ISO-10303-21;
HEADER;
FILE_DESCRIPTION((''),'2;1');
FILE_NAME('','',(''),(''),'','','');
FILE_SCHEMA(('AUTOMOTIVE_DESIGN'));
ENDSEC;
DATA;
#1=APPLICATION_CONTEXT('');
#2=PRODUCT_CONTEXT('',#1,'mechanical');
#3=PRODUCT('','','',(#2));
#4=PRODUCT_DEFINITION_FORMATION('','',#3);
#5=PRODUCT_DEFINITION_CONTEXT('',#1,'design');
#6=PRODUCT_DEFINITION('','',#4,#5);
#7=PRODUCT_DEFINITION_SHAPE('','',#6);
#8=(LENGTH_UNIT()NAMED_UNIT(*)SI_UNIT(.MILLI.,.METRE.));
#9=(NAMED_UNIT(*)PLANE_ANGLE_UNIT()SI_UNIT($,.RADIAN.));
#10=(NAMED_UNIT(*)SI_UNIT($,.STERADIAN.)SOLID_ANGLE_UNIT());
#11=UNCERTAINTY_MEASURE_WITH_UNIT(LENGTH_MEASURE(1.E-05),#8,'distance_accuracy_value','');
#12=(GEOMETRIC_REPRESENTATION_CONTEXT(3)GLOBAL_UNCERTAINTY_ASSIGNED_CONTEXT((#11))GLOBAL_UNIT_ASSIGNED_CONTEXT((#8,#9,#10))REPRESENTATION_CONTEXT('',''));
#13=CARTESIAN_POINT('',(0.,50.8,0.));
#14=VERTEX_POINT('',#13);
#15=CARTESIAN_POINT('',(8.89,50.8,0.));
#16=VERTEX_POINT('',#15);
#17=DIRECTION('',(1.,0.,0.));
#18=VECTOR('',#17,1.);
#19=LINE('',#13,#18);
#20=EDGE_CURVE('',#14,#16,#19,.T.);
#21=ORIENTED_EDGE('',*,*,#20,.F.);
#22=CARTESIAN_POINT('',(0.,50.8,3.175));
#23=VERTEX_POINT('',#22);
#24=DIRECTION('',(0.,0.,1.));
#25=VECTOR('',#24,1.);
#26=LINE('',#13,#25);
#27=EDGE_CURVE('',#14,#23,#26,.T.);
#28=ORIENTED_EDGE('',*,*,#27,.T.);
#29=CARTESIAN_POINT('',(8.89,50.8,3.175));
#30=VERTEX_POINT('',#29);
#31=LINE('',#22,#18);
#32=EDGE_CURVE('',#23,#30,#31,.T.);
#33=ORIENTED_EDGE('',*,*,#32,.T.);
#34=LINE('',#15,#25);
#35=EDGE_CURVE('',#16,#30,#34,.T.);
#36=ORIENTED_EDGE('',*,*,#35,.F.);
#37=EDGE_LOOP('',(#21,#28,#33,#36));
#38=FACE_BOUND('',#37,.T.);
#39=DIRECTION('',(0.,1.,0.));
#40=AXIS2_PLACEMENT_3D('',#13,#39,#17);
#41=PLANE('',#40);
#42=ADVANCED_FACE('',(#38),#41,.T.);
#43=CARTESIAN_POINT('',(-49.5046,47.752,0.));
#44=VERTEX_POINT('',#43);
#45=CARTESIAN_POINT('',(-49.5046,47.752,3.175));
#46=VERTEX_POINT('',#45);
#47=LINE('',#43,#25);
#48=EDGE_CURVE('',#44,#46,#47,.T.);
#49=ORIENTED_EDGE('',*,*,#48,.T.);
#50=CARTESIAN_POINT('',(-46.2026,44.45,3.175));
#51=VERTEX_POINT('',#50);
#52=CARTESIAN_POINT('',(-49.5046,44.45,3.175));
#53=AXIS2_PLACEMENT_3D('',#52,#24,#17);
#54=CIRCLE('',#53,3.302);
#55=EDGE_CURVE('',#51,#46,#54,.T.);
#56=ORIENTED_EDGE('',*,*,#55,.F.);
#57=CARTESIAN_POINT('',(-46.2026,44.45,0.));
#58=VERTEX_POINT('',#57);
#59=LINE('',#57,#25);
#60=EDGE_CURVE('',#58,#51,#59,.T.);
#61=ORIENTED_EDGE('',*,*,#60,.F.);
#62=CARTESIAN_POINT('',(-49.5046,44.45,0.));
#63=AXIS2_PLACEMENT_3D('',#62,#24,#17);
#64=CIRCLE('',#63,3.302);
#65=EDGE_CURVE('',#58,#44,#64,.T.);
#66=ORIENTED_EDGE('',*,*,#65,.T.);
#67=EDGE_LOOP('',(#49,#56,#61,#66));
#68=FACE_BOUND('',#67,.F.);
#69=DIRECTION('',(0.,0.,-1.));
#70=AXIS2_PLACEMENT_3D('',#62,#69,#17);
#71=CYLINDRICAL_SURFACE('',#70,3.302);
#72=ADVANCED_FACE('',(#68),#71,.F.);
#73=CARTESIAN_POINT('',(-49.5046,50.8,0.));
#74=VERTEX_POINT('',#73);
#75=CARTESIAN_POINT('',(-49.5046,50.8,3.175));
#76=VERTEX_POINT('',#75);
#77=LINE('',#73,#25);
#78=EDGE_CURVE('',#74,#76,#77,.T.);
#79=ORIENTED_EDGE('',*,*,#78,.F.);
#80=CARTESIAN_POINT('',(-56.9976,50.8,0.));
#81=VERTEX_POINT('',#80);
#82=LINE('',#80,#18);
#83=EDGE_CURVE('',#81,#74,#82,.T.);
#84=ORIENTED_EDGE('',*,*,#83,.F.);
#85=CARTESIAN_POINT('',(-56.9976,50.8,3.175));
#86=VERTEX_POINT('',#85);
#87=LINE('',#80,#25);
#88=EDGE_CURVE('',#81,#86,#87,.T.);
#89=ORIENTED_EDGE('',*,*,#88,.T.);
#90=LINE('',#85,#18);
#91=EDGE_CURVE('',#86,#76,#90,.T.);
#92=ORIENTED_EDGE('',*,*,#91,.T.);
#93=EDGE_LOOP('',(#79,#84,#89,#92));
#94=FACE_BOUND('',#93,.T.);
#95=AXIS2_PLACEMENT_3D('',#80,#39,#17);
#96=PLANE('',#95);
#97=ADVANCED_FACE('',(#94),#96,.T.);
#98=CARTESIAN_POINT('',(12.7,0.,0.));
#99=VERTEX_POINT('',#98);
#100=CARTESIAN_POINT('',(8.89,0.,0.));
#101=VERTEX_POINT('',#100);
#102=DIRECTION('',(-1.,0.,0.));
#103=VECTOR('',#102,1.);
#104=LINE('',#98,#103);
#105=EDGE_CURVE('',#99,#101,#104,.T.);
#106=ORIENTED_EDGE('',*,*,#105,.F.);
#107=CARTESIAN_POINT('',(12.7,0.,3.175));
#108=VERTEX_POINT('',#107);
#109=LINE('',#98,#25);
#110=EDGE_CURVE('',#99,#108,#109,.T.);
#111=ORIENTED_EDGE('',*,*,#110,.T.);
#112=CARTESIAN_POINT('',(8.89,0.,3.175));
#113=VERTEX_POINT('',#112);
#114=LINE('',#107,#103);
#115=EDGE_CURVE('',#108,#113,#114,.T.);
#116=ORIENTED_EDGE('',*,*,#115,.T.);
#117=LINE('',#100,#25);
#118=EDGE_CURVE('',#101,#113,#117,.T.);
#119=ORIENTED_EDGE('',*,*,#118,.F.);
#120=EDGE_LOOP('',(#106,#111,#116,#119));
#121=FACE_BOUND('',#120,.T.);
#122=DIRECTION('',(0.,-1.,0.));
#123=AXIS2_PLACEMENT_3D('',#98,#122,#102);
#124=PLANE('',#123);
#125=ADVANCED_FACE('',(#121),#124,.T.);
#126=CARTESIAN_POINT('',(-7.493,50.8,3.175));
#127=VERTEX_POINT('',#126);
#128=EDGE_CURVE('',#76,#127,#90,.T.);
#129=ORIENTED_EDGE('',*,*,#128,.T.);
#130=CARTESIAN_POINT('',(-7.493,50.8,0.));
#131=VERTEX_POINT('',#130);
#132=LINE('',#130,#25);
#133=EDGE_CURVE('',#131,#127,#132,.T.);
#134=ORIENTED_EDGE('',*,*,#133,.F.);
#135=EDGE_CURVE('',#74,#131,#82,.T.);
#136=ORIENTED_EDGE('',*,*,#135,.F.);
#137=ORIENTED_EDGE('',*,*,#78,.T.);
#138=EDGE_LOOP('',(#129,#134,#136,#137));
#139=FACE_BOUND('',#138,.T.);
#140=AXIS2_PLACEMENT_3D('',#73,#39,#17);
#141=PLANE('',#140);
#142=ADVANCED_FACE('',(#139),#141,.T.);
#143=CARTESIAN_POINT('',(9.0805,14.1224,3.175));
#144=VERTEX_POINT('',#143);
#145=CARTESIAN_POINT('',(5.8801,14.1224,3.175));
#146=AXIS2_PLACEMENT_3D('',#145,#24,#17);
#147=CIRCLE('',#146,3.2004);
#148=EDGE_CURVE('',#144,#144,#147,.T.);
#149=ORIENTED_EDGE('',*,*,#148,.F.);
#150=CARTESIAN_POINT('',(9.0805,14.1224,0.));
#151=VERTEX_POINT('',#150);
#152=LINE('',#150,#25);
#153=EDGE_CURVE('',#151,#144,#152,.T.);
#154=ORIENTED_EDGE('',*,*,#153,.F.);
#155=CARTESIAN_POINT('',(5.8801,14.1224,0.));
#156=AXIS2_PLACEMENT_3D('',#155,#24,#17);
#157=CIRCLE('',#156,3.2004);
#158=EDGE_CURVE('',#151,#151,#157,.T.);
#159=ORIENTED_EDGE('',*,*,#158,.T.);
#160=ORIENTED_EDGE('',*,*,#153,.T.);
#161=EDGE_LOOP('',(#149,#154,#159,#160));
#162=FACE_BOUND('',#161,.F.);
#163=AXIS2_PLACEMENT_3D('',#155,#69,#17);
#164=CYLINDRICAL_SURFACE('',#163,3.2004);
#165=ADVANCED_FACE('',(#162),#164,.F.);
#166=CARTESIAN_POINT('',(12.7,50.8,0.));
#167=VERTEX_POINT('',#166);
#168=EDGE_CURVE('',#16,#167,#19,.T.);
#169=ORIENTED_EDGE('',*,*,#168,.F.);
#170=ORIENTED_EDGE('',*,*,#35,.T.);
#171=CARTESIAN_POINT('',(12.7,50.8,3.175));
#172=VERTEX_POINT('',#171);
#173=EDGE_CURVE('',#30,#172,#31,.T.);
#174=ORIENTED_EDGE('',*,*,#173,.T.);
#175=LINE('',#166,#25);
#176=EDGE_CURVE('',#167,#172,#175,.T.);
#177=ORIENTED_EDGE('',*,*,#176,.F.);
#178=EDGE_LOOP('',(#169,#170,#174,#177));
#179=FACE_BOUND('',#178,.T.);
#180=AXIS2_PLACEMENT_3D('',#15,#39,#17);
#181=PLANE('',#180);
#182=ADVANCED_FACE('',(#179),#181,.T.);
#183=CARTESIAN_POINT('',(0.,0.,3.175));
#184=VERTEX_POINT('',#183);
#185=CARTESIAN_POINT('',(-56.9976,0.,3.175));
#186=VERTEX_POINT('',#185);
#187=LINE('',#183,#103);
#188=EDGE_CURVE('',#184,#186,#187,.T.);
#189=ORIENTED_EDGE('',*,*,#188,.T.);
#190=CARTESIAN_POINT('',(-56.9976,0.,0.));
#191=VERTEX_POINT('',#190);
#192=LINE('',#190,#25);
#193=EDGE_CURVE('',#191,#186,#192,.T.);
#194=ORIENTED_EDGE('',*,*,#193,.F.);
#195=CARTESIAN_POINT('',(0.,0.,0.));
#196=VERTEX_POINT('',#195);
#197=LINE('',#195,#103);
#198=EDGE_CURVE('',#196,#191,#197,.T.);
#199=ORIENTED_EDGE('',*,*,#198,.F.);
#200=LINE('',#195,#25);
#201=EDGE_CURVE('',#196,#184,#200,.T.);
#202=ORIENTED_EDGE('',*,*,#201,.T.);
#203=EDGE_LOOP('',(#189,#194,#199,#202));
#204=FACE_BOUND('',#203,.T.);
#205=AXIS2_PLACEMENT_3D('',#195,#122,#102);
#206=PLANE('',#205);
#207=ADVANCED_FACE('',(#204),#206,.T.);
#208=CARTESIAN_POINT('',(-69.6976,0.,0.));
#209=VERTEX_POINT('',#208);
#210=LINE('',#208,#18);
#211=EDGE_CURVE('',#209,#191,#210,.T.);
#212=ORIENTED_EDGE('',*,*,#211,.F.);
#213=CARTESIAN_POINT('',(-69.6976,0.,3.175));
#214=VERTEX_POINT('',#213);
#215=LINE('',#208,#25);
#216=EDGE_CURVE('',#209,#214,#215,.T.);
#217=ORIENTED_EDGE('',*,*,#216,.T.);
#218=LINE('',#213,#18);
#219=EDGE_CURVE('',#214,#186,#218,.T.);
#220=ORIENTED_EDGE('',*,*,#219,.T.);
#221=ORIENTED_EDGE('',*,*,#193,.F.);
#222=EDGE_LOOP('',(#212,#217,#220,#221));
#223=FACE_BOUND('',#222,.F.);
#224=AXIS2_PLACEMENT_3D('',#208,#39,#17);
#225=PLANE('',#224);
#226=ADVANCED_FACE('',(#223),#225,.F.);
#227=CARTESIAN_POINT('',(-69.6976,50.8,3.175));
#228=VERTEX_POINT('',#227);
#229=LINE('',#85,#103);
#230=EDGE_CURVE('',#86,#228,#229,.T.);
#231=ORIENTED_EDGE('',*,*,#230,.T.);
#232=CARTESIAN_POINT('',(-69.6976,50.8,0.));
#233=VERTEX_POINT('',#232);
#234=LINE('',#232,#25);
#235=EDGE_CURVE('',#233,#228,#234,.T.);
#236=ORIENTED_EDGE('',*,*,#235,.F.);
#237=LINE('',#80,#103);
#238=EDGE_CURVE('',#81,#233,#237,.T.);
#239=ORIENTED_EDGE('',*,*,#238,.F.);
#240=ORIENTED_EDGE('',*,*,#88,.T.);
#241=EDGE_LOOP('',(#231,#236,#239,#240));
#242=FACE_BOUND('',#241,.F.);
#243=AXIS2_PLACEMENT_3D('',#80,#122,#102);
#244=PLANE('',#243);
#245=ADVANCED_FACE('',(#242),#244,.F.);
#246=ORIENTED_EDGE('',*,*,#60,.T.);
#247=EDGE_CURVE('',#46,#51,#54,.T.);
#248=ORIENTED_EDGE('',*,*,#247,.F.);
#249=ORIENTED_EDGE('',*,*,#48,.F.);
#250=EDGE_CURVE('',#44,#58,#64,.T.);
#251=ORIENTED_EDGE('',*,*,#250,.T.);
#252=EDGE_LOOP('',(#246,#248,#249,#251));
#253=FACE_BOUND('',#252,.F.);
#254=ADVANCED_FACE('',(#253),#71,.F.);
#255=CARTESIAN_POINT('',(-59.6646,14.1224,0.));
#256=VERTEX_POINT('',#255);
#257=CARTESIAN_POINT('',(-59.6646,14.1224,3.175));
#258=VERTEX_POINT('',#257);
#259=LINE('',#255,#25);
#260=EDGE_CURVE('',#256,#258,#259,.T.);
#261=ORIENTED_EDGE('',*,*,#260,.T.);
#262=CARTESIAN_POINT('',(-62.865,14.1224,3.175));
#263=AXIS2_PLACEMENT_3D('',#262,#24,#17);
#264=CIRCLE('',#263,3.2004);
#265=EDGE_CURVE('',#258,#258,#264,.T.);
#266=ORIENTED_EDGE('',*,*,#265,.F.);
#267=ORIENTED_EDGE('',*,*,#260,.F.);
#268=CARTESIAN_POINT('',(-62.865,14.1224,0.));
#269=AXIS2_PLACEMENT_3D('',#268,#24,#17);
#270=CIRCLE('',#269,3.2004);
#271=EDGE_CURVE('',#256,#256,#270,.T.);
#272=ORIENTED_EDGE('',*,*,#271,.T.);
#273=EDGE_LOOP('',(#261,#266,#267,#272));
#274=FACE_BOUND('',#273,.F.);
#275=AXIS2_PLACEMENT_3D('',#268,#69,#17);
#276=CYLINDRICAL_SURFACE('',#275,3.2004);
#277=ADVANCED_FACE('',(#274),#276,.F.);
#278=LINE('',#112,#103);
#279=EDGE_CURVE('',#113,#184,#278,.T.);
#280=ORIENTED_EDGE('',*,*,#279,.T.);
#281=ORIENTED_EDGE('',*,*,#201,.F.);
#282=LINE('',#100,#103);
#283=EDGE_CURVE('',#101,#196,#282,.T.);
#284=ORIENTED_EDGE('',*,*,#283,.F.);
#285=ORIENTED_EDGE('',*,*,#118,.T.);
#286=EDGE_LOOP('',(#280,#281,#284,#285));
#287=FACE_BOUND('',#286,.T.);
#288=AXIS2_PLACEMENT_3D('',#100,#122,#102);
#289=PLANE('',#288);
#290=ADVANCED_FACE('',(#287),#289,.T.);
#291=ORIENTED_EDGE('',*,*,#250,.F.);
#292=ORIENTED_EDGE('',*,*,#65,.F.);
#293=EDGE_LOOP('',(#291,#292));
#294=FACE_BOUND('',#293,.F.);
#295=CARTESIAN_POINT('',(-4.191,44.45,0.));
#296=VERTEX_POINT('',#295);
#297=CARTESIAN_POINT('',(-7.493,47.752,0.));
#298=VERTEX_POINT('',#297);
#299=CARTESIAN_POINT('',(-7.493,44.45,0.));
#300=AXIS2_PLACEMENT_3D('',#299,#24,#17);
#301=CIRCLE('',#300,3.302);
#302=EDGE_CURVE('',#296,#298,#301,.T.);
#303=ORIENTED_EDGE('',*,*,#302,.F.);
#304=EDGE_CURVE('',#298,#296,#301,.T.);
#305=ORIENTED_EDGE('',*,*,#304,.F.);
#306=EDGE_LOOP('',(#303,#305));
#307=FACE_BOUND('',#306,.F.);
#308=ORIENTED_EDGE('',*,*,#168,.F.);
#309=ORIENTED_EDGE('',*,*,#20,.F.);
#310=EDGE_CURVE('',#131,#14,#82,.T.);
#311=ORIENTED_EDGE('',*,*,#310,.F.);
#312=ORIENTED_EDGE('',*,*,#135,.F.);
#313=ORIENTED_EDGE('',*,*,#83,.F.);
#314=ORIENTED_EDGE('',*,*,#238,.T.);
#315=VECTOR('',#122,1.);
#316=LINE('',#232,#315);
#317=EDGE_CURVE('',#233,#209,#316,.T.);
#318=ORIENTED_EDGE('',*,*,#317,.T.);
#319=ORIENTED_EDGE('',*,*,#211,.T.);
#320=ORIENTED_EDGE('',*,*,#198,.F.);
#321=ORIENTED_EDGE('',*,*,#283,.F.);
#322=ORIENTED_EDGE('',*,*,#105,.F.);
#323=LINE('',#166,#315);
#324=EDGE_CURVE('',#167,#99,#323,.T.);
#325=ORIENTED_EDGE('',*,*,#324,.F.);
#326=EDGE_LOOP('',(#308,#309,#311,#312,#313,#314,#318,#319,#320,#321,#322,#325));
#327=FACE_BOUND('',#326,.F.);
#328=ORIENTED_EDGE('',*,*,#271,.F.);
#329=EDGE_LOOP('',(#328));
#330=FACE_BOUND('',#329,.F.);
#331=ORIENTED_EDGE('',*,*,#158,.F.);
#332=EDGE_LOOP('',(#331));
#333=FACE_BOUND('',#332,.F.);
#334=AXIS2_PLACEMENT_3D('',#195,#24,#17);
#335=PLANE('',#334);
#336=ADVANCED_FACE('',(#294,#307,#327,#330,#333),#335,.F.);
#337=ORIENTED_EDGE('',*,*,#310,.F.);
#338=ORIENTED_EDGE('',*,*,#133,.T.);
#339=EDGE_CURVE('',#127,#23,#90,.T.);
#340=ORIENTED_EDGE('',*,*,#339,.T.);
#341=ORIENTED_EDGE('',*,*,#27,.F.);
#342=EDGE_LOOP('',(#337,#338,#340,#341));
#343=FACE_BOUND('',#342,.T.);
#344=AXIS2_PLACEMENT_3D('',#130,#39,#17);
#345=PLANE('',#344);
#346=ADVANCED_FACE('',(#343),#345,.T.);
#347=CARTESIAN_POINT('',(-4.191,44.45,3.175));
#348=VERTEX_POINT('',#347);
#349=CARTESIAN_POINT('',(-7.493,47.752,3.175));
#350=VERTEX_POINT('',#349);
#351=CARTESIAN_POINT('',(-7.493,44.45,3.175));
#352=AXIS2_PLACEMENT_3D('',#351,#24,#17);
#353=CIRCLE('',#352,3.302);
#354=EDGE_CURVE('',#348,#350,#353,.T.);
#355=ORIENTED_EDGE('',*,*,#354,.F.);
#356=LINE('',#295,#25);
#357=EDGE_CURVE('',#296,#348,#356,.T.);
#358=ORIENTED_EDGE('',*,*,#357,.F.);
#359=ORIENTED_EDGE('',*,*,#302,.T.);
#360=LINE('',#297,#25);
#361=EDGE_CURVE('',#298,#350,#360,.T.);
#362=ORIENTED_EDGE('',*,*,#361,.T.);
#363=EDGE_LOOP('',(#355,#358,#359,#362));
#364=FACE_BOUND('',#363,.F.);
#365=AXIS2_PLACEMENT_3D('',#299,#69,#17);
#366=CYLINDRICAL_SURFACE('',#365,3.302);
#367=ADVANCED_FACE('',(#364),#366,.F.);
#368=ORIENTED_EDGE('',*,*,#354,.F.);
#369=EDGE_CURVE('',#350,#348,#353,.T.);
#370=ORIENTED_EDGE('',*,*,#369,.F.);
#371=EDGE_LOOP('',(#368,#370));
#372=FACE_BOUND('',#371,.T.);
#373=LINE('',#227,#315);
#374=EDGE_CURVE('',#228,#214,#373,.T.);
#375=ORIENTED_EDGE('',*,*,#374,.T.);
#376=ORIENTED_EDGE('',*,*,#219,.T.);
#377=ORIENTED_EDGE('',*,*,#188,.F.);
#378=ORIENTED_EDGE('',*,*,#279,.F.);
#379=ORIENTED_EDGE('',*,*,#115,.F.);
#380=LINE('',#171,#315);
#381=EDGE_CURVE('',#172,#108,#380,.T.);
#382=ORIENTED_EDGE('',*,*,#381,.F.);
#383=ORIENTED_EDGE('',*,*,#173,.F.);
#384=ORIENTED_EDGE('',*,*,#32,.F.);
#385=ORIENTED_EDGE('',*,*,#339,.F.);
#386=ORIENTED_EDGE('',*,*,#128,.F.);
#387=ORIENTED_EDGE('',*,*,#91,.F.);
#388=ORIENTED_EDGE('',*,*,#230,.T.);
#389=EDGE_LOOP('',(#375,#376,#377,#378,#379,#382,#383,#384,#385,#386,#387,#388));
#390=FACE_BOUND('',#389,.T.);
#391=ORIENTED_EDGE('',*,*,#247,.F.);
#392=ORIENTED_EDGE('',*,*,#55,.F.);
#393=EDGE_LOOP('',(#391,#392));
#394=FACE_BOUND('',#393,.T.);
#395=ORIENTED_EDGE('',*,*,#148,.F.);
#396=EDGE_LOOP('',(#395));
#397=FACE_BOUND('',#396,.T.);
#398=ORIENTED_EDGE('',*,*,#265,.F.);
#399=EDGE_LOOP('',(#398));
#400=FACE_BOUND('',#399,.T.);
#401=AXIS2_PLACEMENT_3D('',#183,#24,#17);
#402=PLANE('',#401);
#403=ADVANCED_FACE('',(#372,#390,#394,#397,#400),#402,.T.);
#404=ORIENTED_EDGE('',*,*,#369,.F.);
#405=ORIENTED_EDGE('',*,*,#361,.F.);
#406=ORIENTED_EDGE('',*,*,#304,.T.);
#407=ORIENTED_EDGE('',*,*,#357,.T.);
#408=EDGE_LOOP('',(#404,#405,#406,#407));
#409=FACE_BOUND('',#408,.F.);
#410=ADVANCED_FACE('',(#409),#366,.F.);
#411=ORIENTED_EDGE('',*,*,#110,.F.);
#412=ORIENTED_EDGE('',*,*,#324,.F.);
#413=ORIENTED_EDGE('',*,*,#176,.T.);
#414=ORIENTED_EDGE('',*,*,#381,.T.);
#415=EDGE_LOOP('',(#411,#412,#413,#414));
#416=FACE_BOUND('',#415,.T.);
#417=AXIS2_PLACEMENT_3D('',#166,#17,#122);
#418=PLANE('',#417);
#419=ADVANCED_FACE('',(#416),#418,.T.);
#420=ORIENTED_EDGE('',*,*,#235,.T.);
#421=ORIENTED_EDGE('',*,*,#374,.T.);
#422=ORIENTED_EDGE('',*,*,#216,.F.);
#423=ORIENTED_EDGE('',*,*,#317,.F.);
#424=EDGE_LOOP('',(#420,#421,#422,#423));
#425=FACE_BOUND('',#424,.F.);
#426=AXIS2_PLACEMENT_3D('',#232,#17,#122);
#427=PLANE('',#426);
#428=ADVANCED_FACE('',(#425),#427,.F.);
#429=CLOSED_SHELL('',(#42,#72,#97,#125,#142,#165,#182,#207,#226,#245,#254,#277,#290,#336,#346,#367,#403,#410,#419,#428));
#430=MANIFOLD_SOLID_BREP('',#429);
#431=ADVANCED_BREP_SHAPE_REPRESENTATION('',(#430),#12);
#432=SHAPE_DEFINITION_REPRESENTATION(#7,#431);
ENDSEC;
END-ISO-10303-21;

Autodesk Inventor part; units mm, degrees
ref_plane "YZ Plane" through (0, 0, 0) normal (1, 0, 0) x (0, 1, 0)
ref_plane "XZ Plane" through (0, 0, 0) normal (0, 1, 0) x (-1, 0, 0)
ref_plane "XY Plane" through (0, 0, 0) normal (0, 0, 1) x (1, 0, 0)
sketch "Sketch1" plane through (0, 0, 0) normal (0, 0, 1) x (1, 0, 0)
  line L0 (0, 0) -> (-56.9976, 0)
  line L1 (-56.9976, 50.8) -> (0, 50.8)
  line L2 (0, 50.8) -> (-7.493, 50.8)
  line L3 (-7.493, 50.8) -> (-7.493, 44.45)
  line L4 (-56.9976, 50.8) -> (-49.5046, 50.8)
  line L5 (-49.5046, 50.8) -> (-49.5046, 44.45)
  circle A0 centre (-49.5046, 44.45) radius 3.302
  circle A1 centre (-7.493, 44.45) radius 3.302
  circle A2 centre (-62.865, 14.1224) radius 3.2004
  circle A3 centre (5.8801, 14.1224) radius 3.2004
  line L6 (-56.9976, 50.8) -> (-69.6976, 50.8)
  line L7 (-69.6976, 50.8) -> (-69.6976, 0)
  line L8 (-69.6976, 0) -> (-56.9976, 0)
  line L9 (0, 50.8) -> (8.89, 50.8)
  line L10 (8.89, 0) -> (0, 0)
  line L11 (0, 50.8) -> (12.7, 50.8)
  line L12 (12.7, 50.8) -> (12.7, 0)
  line L13 (12.7, 0) -> (0, 0)
  dimension "d1" = 56.9976
  dimension "d2" = 50.8
  dimension "d3" = 7.493
  dimension "d4" = 6.35
  dimension "d5" = 7.493
  dimension "d6" = 6.604
  dimension "d7" = 6.604
  dimension "d19" = 6.35
  dimension "d46" = 6.4008
  dimension "d47" = 6.4008
  dimension "d48" = 12.7
  dimension "d51" = 50.8
  dimension "d53" = 36.6776
  dimension "d55" = 36.6776
  dimension "d57" = 12.7
  dimension "d58" = 6.8199
  dimension "d59" = 6.8326
extrude "Plate5" add sketch "Sketch1" along normal blind 3.175
equation "\"BendRadius\" = Thickness"
equation "\"BendReliefWidth\" = Thickness"
equation "\"BendReliefDepth\" = 0.5 * Thickness"
equation "\"CornerReliefSize\" = 4 * Thickness"
equation "\"MinimumRemnant\" = 2 * Thickness"
equation "\"TransitionRadius\" = BendRadius"
equation "\"JacobiRadiusSize\" = BendRadius"
equation "\"GapSize\" = Thickness"
equation "\"d8\" = BendRadius"
equation "\"d56\" = BendRadius"
equation "\"Thickness\" = 3.175"
properties part number "face mount" material "Aluminum 6061"
